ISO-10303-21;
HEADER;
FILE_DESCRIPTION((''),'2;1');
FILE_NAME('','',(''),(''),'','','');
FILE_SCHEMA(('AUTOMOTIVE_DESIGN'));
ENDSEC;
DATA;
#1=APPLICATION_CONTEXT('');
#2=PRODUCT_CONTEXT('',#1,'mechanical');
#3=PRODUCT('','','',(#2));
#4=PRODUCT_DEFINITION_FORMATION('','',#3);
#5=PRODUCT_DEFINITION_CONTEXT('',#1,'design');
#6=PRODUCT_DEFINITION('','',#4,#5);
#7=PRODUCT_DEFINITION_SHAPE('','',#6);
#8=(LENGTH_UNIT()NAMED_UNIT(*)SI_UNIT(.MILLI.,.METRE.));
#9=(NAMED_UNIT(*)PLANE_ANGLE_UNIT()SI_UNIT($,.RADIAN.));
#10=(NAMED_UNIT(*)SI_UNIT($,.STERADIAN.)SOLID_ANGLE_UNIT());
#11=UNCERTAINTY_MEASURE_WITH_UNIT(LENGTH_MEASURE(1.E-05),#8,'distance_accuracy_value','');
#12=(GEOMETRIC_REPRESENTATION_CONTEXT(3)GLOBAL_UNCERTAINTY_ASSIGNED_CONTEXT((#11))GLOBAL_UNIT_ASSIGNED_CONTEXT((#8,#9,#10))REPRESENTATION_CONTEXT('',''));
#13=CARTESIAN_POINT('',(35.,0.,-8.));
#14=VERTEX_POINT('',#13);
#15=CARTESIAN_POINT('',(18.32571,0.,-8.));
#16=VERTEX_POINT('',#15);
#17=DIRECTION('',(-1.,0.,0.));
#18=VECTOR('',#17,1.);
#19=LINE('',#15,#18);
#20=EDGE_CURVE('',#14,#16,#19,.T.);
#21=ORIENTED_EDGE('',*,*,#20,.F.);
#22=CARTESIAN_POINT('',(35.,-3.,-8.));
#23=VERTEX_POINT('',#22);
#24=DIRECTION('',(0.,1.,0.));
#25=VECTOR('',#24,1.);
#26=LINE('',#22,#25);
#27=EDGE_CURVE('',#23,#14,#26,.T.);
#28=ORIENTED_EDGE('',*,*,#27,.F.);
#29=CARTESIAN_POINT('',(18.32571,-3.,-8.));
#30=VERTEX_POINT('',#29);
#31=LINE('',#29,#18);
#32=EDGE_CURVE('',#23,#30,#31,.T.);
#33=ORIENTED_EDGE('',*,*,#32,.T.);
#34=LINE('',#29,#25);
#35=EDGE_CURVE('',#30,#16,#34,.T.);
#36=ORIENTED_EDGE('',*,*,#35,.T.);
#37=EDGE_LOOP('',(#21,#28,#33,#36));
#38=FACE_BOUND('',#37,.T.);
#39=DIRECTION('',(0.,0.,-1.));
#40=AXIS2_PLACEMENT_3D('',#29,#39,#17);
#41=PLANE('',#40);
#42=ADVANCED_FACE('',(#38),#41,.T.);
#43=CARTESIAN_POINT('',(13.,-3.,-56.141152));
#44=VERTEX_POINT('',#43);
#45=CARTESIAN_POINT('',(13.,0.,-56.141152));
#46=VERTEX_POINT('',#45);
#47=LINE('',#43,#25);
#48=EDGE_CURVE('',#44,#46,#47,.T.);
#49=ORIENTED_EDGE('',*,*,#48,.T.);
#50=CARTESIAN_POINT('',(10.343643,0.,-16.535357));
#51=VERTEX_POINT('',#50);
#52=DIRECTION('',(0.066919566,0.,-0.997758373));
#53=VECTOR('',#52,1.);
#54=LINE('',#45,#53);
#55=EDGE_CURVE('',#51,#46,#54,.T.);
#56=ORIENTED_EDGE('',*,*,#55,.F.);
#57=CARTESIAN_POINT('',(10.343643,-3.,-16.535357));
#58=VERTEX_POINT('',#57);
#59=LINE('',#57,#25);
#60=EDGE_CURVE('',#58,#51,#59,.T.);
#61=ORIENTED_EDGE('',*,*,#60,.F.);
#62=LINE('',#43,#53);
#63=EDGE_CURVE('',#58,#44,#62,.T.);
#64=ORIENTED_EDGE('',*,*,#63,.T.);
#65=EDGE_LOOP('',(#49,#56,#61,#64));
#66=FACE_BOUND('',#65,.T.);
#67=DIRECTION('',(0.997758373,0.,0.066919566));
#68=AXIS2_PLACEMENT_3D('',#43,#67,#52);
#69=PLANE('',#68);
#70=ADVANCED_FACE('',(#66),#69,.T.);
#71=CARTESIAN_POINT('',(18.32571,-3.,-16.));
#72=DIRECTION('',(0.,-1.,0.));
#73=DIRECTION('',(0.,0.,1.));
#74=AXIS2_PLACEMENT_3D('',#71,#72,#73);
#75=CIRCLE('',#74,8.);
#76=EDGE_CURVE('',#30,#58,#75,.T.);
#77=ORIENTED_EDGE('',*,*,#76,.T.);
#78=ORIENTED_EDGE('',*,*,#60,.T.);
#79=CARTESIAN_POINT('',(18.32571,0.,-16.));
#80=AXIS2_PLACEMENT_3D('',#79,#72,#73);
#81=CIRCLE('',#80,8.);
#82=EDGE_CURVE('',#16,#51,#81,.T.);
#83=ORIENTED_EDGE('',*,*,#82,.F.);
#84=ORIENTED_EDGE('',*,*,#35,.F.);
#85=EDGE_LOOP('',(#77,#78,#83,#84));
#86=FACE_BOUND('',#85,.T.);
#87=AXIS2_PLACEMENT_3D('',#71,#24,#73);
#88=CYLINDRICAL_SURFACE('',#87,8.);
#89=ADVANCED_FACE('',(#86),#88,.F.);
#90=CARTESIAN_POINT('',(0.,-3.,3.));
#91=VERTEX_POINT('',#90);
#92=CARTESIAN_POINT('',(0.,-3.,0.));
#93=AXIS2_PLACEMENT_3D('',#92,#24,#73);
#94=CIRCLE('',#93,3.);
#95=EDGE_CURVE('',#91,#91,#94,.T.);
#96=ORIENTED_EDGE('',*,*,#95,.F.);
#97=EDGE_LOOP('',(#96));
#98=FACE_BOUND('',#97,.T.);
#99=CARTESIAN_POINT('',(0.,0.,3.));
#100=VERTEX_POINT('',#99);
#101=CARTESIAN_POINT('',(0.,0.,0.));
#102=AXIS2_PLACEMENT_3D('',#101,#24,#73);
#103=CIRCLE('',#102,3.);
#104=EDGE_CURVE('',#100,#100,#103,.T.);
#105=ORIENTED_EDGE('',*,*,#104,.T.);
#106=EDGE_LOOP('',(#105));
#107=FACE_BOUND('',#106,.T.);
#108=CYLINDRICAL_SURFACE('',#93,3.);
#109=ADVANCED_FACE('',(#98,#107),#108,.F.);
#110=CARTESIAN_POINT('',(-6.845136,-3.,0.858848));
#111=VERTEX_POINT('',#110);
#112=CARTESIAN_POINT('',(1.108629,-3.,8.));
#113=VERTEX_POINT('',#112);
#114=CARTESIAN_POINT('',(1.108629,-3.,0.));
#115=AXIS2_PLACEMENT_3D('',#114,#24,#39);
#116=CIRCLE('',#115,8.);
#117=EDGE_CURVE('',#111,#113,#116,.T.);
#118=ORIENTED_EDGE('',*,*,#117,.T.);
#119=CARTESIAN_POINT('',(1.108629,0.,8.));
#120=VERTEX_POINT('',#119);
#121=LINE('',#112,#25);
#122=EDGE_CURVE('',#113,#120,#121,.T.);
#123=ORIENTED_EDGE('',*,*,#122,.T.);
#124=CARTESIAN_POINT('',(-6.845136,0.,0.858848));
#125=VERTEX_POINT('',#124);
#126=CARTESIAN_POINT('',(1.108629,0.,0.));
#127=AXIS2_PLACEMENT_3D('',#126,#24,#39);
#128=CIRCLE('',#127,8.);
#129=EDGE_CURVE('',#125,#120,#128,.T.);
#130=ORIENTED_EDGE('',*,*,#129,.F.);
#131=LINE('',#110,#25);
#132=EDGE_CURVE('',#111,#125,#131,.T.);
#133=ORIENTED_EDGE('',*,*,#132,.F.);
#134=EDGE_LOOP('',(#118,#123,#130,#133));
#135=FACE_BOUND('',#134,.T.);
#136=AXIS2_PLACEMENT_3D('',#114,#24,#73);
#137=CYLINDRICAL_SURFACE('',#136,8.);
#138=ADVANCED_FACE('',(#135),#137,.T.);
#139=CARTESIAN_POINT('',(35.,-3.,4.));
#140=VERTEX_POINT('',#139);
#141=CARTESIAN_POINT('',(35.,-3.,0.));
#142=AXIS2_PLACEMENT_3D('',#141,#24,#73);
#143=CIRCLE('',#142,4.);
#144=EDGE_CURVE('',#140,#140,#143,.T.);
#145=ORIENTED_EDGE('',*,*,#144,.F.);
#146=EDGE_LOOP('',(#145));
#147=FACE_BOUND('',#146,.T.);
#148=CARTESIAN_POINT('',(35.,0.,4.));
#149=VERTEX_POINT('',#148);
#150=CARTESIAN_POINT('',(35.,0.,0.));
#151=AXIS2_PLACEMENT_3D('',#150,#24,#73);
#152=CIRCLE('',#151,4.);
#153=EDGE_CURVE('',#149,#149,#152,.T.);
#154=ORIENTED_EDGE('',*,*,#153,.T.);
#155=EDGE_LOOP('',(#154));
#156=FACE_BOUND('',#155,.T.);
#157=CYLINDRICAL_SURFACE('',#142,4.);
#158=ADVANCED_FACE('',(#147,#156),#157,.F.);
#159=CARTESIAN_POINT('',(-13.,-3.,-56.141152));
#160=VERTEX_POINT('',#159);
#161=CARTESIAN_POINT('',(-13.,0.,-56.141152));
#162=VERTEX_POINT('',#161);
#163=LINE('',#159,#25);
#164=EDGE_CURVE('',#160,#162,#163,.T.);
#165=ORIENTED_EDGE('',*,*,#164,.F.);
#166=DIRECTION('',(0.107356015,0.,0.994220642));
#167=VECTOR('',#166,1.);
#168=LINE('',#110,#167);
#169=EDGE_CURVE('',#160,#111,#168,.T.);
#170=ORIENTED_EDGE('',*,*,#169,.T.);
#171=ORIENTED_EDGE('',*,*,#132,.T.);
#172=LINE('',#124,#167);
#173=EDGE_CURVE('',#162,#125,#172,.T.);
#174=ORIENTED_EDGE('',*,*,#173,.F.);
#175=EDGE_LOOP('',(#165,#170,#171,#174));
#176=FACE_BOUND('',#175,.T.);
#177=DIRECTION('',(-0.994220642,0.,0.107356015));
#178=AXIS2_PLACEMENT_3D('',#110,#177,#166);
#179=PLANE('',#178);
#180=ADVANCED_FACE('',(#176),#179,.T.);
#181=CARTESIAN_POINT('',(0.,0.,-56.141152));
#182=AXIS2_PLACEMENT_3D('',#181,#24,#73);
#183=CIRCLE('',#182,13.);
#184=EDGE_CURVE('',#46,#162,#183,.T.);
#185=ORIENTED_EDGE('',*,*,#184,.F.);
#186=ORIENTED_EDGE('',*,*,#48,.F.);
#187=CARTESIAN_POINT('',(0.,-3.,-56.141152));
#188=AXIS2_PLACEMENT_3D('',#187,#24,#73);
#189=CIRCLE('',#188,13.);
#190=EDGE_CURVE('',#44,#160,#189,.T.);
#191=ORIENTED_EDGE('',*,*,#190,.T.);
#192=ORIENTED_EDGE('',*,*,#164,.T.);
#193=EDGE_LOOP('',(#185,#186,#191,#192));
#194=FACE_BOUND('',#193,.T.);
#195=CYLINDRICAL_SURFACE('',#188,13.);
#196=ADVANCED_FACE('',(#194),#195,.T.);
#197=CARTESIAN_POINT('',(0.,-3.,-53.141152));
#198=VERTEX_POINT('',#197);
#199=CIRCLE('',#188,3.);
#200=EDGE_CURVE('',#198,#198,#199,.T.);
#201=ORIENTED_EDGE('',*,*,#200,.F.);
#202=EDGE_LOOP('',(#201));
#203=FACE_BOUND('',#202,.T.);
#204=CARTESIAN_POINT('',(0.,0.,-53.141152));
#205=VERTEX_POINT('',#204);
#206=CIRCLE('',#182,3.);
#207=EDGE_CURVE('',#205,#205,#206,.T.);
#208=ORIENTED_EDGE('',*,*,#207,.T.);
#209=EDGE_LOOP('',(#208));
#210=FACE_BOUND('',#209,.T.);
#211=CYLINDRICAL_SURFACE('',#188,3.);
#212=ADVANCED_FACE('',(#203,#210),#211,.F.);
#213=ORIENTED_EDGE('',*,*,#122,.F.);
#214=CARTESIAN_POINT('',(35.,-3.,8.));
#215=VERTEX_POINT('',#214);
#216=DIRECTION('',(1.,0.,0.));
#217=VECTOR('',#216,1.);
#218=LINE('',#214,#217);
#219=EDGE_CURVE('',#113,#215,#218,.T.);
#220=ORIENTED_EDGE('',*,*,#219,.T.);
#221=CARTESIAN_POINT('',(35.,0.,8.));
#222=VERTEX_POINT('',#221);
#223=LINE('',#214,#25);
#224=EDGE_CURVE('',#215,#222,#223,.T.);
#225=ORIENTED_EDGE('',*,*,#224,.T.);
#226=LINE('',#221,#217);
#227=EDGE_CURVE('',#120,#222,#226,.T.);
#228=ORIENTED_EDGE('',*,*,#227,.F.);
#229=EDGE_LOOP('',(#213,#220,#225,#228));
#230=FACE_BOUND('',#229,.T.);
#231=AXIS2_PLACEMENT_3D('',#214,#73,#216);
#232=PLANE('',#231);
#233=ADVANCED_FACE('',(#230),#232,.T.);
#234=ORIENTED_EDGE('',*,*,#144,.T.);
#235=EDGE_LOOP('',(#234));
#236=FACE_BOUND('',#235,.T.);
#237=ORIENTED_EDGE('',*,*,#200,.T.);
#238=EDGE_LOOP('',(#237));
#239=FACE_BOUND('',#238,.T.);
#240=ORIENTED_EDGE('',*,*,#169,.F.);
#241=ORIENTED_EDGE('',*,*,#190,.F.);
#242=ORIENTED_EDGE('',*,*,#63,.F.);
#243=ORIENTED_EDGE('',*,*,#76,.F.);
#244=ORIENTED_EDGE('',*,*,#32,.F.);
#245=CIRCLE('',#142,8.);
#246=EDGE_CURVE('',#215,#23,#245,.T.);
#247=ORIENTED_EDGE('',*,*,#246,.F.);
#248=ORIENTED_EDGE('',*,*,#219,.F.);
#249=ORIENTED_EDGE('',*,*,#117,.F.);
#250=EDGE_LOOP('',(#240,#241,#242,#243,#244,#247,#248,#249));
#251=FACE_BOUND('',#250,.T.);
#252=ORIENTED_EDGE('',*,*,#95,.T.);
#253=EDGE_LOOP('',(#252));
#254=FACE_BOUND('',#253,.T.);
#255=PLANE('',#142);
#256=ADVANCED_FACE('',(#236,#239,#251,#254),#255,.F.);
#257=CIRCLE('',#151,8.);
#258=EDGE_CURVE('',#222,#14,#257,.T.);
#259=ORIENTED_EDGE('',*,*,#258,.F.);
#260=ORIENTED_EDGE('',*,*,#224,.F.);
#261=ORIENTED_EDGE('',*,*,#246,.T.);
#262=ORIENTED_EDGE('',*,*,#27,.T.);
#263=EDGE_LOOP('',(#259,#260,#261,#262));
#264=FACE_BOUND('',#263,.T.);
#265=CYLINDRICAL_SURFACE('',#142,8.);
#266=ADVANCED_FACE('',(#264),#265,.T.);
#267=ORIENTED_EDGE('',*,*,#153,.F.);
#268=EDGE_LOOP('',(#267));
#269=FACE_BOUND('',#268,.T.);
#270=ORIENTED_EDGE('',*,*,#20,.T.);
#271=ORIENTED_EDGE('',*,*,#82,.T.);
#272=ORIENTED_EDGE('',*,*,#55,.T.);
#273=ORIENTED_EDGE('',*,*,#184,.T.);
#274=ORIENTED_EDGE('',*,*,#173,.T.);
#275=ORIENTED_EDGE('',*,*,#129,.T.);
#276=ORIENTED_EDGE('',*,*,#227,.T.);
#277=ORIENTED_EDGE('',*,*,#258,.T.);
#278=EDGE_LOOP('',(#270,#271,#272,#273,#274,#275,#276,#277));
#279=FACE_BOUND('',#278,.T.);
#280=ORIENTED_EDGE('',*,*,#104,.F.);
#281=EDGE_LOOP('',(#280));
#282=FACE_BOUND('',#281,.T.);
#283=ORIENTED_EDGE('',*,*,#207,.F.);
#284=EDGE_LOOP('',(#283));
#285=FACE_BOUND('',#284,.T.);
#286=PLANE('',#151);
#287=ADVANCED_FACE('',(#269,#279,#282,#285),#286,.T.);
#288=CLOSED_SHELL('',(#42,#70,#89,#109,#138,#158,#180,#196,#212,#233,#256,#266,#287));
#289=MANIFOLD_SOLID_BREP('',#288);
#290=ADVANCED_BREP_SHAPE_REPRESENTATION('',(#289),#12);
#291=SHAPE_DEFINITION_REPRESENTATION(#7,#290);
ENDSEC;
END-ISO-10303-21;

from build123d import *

# Parameters (mm, degrees)
SCHIZZO1_R          = 3
SCHIZZO1_R_2        = 4
BASE_FLANGIA1_DEPTH = 3


# Sheet-metal steps are written as plain solids
with BuildPart() as part:
    # Schizzo1 → Base-Flangia1 (new body)
    with BuildSketch(Plane(origin=(0, 0, 0), x_dir=(1, 0, 0), z_dir=(0, 1, 0))):
        with BuildLine():
            Line((35, -8), (1.108629176, -8))
            ThreePointArc((1.108629176, -8), (-4.235957572, -5.952763433), (-6.845135964, -0.858848123))
            Line((-6.845135964, -0.858848123), (-13, 56.141151877))
            ThreePointArc((-13, 56.141151877), (0, 69.141151877), (13, 56.141151877))
            Line((13, 56.141151877), (10.343642784, 16.535356532))
            ThreePointArc((10.343642784, 16.535356532), (12.48264327, 10.535700057), (18.32570977, 8))
            Line((18.32570977, 8), (35, 8))
            ThreePointArc((35, 8), (43, 0), (35, -8))
        make_face()
        with Locations(Location((0, 0, 0), (0, 0, 270))):
            Circle(SCHIZZO1_R, mode=Mode.SUBTRACT)
        with Locations(Location((35, 0, 0), (0, 0, 270))):
            Circle(SCHIZZO1_R_2, mode=Mode.SUBTRACT)
        with Locations(Location((0, 56.141151877, 0), (0, 0, 270))):
            Circle(SCHIZZO1_R, mode=Mode.SUBTRACT)
    extrude(amount=-BASE_FLANGIA1_DEPTH)


solid = part.part
